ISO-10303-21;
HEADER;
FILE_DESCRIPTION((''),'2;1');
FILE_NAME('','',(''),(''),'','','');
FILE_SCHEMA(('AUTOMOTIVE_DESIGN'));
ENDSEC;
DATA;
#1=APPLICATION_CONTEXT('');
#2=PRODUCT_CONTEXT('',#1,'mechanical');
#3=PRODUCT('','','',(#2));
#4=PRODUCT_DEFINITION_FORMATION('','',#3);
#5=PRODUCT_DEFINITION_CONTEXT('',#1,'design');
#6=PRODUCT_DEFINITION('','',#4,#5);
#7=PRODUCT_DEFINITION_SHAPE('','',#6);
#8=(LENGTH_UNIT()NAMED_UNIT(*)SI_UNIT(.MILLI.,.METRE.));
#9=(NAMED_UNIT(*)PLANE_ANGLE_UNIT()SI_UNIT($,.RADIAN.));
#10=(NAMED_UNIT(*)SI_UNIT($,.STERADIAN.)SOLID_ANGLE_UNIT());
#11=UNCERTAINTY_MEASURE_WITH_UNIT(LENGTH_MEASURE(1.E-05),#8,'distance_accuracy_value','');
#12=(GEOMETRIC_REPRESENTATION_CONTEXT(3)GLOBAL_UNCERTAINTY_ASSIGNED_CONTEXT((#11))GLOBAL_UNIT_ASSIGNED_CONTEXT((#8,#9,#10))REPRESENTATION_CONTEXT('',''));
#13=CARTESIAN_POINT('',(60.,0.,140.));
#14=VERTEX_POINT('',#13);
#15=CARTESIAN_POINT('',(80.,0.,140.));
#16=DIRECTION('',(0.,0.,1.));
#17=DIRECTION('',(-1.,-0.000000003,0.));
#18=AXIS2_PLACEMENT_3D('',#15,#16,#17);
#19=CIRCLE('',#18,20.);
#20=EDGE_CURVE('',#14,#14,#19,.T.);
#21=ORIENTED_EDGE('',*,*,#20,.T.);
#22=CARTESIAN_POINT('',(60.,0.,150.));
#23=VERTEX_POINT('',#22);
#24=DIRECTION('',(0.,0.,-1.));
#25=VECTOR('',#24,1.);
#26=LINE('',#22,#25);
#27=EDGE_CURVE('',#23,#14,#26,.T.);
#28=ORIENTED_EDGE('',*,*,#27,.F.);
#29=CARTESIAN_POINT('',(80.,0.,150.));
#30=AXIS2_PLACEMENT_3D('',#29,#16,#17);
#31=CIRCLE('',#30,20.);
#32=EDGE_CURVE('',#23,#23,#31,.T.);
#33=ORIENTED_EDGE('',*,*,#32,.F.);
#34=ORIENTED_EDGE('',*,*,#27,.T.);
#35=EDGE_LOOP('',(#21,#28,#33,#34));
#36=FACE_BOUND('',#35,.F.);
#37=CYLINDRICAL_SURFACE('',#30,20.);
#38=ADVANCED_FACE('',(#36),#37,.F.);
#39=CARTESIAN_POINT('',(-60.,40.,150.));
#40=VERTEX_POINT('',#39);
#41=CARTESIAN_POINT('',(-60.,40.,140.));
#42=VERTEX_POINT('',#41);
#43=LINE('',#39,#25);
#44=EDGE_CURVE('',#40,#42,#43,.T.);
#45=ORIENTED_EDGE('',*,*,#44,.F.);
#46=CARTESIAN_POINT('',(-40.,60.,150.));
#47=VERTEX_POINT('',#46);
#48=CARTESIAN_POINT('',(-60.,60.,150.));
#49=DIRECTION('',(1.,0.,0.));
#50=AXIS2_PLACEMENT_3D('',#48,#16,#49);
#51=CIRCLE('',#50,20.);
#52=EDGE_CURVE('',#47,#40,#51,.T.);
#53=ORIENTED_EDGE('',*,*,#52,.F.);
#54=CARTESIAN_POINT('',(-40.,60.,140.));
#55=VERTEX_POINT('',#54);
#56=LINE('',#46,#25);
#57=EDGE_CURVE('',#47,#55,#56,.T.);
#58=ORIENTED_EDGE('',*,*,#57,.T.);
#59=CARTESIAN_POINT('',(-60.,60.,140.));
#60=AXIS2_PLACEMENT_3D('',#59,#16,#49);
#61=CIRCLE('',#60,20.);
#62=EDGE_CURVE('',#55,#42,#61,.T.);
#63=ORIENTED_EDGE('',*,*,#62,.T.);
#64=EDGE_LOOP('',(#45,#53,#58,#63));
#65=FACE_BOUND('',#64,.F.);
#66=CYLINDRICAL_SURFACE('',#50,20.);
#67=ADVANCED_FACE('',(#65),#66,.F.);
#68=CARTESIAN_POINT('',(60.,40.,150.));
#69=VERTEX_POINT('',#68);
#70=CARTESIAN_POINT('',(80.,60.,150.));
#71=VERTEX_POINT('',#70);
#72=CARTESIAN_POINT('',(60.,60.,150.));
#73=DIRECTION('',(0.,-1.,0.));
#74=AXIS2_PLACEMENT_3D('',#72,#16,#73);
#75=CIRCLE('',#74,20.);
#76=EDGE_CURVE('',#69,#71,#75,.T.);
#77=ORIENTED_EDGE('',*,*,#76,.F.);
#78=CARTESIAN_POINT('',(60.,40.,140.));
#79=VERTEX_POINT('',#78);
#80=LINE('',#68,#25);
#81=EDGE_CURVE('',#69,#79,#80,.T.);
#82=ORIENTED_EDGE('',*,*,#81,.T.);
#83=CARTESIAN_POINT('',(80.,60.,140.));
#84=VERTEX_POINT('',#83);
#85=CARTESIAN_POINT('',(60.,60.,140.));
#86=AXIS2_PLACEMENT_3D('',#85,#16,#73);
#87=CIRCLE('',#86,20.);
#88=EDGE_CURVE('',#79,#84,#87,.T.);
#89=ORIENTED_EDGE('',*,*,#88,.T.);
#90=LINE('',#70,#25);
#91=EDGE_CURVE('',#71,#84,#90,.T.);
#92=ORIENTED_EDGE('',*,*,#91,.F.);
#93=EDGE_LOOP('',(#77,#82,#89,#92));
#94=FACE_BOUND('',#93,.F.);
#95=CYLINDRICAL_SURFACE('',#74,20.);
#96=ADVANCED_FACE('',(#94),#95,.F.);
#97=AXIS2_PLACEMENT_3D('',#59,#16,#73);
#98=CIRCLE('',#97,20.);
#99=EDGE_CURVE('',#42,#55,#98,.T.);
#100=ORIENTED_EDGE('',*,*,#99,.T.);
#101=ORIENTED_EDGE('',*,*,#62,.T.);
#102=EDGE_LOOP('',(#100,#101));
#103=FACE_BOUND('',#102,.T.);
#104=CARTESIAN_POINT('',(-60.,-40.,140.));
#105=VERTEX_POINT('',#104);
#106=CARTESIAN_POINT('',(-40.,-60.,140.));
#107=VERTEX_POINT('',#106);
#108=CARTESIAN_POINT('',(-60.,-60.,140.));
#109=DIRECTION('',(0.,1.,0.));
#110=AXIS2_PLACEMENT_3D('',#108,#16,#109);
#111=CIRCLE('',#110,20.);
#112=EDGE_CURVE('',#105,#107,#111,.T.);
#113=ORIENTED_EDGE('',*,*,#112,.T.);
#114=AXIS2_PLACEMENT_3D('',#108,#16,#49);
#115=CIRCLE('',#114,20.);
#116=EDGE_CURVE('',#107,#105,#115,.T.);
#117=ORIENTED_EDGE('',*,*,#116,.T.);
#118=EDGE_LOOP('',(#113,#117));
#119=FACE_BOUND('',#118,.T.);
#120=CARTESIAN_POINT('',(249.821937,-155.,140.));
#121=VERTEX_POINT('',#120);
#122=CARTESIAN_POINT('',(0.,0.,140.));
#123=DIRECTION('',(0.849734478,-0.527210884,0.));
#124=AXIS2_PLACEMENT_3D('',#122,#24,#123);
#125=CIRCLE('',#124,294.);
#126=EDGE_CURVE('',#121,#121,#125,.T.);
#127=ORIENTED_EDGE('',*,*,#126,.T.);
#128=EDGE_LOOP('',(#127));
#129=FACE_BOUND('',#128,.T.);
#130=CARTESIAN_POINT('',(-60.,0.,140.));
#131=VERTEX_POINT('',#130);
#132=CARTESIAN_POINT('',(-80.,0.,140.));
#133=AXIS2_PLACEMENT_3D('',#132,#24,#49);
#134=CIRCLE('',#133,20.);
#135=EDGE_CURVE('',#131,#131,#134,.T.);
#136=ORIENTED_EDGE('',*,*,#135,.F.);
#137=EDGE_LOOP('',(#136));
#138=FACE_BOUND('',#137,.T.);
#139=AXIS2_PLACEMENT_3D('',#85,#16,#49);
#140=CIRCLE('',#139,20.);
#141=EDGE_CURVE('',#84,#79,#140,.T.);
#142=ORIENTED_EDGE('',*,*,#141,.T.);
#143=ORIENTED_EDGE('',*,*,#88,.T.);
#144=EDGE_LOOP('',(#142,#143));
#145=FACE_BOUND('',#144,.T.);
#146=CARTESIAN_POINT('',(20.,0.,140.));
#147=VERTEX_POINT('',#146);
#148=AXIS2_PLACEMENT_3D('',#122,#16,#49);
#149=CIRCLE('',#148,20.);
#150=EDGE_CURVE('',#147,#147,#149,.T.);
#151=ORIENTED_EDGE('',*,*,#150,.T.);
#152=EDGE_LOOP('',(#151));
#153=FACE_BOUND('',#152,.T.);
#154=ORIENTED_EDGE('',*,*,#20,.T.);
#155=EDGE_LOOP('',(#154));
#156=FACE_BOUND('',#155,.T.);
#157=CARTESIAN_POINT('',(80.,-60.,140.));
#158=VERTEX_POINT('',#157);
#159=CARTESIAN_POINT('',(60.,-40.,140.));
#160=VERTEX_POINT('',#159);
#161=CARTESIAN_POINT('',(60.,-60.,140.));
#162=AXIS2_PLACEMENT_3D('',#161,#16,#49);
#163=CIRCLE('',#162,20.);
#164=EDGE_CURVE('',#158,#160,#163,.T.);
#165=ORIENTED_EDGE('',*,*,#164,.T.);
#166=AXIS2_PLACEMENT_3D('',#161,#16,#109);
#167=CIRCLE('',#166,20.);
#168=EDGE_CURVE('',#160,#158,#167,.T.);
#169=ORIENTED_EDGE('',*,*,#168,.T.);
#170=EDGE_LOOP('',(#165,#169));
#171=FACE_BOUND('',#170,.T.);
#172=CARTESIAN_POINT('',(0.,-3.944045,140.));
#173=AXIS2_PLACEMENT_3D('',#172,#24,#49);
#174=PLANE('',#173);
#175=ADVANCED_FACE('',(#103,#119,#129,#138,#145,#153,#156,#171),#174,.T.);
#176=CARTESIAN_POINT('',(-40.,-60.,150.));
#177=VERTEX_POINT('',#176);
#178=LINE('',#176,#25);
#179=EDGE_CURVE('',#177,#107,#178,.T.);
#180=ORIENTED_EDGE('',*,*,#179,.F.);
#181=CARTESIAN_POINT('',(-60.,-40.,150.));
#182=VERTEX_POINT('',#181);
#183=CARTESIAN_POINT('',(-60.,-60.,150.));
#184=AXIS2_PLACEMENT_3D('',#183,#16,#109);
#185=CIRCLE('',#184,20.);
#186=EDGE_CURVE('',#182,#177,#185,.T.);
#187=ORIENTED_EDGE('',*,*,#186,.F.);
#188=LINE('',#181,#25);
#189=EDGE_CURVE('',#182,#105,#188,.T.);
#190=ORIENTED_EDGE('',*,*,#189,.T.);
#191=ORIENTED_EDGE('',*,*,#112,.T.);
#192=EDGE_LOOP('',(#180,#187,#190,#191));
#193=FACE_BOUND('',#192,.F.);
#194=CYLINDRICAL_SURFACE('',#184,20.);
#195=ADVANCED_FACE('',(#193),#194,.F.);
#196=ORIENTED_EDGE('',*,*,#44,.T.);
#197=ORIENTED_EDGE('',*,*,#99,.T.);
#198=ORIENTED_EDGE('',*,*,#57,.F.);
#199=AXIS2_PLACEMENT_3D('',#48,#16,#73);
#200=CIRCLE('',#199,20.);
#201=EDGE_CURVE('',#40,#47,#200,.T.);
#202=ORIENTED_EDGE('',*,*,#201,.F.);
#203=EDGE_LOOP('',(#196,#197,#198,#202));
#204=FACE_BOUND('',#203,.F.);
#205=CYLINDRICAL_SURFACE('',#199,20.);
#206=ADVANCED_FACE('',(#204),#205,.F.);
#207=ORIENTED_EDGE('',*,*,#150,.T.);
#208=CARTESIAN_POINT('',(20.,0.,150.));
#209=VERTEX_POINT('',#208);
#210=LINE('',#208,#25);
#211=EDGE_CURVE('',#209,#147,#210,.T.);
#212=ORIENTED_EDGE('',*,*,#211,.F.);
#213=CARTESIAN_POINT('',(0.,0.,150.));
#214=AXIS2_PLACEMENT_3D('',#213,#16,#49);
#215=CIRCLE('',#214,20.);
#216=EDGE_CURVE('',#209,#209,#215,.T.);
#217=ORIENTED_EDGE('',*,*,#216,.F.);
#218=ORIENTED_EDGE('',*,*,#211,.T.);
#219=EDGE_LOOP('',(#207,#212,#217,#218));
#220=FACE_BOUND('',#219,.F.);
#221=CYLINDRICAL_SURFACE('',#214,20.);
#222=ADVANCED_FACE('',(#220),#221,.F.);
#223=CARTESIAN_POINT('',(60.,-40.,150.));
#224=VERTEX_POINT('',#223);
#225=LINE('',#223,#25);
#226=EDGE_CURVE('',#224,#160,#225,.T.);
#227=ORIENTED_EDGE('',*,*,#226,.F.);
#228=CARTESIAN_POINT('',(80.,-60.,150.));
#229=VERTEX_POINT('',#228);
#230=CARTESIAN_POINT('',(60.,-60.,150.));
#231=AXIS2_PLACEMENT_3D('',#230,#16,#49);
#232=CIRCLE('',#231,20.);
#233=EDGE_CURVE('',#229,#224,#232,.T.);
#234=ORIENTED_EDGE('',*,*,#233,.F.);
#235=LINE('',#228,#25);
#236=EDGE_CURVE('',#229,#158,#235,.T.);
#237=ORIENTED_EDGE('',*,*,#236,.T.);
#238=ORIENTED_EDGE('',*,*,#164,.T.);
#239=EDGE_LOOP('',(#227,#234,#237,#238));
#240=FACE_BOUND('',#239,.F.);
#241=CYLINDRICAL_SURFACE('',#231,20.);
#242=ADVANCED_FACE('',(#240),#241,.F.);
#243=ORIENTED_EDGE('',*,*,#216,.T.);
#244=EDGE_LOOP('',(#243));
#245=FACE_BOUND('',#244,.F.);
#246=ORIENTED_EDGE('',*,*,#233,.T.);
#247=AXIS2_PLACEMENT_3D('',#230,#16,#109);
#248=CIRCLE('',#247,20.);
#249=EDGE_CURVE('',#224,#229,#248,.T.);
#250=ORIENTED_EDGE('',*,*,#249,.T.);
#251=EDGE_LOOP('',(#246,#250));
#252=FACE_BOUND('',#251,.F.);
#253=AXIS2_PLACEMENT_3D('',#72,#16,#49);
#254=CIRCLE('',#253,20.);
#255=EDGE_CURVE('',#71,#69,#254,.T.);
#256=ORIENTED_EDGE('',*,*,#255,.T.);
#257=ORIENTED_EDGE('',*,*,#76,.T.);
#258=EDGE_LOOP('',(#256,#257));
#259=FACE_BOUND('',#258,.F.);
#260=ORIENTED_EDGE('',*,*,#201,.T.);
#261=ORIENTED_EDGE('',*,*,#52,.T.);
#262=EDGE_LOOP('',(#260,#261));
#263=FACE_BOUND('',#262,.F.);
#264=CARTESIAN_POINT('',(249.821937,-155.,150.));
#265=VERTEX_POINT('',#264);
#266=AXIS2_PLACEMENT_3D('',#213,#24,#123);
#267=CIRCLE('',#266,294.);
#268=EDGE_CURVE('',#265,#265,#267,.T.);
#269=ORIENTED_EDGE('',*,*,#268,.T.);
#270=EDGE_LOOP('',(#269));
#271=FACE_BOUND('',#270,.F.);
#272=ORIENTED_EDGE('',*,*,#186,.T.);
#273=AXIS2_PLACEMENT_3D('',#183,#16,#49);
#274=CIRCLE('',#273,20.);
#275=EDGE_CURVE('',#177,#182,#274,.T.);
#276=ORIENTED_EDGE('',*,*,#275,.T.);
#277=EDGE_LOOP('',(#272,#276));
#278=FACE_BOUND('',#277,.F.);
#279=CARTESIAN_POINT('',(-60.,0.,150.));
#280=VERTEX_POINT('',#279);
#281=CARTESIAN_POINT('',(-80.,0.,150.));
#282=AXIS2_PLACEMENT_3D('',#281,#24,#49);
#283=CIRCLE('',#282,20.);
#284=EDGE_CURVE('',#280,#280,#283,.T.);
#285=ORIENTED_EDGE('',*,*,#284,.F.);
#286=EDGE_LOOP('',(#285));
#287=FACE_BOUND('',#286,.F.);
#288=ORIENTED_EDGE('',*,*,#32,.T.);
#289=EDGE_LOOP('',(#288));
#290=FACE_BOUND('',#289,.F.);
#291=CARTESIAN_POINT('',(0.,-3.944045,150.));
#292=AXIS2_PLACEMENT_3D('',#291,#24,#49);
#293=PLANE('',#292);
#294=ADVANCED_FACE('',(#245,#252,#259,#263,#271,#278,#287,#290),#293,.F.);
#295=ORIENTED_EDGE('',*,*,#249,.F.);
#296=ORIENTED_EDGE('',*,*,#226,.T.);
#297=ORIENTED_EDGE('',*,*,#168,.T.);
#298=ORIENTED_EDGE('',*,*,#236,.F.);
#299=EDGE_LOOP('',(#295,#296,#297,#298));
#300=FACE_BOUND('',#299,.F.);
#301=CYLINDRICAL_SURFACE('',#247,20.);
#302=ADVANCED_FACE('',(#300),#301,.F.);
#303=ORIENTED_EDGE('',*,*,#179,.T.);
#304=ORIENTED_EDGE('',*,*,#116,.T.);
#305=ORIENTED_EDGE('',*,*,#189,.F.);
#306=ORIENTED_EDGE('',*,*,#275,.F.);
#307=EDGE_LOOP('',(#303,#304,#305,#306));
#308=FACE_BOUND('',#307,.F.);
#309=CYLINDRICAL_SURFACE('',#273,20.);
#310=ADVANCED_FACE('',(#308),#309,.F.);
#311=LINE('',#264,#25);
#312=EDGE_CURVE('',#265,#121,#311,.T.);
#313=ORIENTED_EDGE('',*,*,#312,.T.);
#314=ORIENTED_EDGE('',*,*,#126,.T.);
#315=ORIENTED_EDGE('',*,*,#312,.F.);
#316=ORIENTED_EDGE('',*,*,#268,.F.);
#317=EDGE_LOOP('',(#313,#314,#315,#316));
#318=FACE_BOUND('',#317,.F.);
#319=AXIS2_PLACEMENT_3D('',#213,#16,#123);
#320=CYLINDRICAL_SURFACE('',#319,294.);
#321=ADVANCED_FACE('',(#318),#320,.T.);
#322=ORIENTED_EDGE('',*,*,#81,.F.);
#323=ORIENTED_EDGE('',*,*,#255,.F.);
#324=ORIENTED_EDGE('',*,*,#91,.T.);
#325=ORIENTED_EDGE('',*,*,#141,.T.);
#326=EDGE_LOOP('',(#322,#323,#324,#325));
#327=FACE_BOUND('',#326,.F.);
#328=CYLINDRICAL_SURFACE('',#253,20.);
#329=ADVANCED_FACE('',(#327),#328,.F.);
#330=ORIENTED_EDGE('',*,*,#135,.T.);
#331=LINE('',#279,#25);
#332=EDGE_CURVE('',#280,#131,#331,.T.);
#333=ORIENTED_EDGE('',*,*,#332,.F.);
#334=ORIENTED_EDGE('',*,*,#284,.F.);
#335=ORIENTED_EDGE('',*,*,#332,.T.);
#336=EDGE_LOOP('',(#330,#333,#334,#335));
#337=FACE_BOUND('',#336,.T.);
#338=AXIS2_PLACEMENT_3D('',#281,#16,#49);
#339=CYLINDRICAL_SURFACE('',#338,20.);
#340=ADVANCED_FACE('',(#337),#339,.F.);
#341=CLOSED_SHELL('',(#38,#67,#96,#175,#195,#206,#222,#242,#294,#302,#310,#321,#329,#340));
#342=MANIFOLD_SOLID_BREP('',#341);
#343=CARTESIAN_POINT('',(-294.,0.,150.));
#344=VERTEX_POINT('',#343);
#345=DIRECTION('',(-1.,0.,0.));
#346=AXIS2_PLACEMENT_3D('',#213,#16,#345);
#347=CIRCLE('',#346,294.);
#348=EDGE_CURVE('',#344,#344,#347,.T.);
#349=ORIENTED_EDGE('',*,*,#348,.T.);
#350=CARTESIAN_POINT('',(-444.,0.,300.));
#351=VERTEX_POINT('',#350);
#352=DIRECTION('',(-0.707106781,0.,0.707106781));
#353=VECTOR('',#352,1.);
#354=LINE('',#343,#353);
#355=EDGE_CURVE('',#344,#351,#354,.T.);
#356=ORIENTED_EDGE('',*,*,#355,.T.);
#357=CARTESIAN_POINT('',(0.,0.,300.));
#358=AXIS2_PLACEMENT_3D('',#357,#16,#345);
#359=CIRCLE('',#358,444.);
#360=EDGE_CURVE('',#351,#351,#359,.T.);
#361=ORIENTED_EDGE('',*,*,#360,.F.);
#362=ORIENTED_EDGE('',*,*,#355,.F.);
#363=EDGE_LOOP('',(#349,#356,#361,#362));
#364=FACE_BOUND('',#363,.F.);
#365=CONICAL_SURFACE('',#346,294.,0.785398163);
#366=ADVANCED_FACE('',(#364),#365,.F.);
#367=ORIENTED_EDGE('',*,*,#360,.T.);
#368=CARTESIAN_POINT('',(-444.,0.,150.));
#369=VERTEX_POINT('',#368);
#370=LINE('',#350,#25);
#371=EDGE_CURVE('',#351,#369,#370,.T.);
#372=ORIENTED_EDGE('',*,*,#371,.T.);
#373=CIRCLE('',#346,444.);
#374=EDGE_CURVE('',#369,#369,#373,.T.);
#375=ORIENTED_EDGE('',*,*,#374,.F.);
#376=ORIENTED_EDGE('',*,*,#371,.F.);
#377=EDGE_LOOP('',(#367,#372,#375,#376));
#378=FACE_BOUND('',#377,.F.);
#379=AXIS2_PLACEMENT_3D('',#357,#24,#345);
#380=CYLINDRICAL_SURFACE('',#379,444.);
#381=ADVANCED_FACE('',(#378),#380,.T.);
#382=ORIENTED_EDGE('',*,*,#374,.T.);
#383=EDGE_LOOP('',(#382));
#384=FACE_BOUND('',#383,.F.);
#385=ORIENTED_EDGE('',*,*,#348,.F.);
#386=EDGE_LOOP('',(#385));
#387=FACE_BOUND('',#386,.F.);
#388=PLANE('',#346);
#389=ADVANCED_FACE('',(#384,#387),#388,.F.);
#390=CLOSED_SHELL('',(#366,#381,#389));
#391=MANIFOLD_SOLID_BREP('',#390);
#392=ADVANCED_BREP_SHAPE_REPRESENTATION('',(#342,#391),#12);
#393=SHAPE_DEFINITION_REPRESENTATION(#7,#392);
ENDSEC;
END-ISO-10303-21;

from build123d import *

# Parameters (mm, degrees)
F2_R     = 20
F5_DEPTH = 10


# Not quite as in the source:
# - the program builds the solid bodies; features that only make, move or delete a surface that nothing else refers to are left out


with BuildPart() as f1:
    # F0 (on Front) → F1 (revolve)
    with BuildSketch(Plane.XZ):
        Polygon((-444, 300), (-444, 150), (-294, 150), align=None)
    revolve(axis=Axis((0, 0, 272.4012136459), (0, 0, 1)))


with BuildPart() as f5:
    # F2 (on face) → F5 (new body)
    with BuildSketch(Plane(origin=(0, 0, 150), x_dir=(1, 0, 0), z_dir=(0, 0, -1))):
        Polygon((249.8219365868, 155), (0, 155), (-249.8219365868, 155), (0, -294), align=None)
        Polygon((-203.0846477822, 125), (0, 125), (203.0846477822, 125), (0, -240), align=None, mode=Mode.SUBTRACT)
        Polygon((203.0846477822, 125), (0, 125), (-203.0846477822, 125), (0, -240), align=None)
        with BuildLine():
            ThreePointArc((-40, -60), (-74.1421356237, -74.1421356237), (-60, -40))
            ThreePointArc((-60, -40), (-45.8578643763, -45.8578643763), (-40, -60))
        make_face(mode=Mode.SUBTRACT)
        with BuildLine():
            ThreePointArc((80, -60), (45.8578643763, -74.1421356237), (60, -40))
            ThreePointArc((60, -40), (74.1421356237, -45.8578643763), (80, -60))
        make_face(mode=Mode.SUBTRACT)
        with Locations((-80, 0)):
            Circle(F2_R, mode=Mode.SUBTRACT)
        with BuildLine():
            ThreePointArc((-40, 60), (-45.8578643763, 45.8578643763), (-60, 40))
            ThreePointArc((-60, 40), (-74.1421356237, 74.1421356237), (-40, 60))
        make_face(mode=Mode.SUBTRACT)
        with BuildLine():
            ThreePointArc((-20, 0), (0, 20), (20, 0))
            ThreePointArc((20, 0), (0, -20), (-20, 0))
        make_face(mode=Mode.SUBTRACT)
        with BuildLine():
            ThreePointArc((100, 0), (79.9999999661, -20), (60, 6.79e-08))
            ThreePointArc((60, 6.79e-08), (80.0000000339, 20), (100, 0))
        make_face(mode=Mode.SUBTRACT)
        with BuildLine():
            ThreePointArc((80, 60), (74.1421356237, 45.8578643763), (60, 40))
            ThreePointArc((60, 40), (45.8578643763, 74.1421356237), (80, 60))
        make_face(mode=Mode.SUBTRACT)
        with BuildLine():
            Line((0, -294), (-249.8219365868, 155))
            ThreePointArc((-249.8219365868, 155), (-256.910490249, -142.9440449966), (0, -294))
        make_face()
        with BuildLine():
            ThreePointArc((294, 0), (282.7398533604, 80.5864462657), (249.8219365868, 155))
            Line((249.8219365868, 155), (0, -294))
            ThreePointArc((0, -294), (207.8893936688, -207.8893936688), (294, 0))
        make_face()
        with BuildLine():
            Line((-249.8219365868, 155), (0, 155))
            Line((0, 155), (249.8219365868, 155))
            ThreePointArc((249.8219365868, 155), (0, 294), (-249.8219365868, 155))
        make_face()
    extrude(amount=F5_DEPTH)


solid = Compound([f1.part, f5.part])
